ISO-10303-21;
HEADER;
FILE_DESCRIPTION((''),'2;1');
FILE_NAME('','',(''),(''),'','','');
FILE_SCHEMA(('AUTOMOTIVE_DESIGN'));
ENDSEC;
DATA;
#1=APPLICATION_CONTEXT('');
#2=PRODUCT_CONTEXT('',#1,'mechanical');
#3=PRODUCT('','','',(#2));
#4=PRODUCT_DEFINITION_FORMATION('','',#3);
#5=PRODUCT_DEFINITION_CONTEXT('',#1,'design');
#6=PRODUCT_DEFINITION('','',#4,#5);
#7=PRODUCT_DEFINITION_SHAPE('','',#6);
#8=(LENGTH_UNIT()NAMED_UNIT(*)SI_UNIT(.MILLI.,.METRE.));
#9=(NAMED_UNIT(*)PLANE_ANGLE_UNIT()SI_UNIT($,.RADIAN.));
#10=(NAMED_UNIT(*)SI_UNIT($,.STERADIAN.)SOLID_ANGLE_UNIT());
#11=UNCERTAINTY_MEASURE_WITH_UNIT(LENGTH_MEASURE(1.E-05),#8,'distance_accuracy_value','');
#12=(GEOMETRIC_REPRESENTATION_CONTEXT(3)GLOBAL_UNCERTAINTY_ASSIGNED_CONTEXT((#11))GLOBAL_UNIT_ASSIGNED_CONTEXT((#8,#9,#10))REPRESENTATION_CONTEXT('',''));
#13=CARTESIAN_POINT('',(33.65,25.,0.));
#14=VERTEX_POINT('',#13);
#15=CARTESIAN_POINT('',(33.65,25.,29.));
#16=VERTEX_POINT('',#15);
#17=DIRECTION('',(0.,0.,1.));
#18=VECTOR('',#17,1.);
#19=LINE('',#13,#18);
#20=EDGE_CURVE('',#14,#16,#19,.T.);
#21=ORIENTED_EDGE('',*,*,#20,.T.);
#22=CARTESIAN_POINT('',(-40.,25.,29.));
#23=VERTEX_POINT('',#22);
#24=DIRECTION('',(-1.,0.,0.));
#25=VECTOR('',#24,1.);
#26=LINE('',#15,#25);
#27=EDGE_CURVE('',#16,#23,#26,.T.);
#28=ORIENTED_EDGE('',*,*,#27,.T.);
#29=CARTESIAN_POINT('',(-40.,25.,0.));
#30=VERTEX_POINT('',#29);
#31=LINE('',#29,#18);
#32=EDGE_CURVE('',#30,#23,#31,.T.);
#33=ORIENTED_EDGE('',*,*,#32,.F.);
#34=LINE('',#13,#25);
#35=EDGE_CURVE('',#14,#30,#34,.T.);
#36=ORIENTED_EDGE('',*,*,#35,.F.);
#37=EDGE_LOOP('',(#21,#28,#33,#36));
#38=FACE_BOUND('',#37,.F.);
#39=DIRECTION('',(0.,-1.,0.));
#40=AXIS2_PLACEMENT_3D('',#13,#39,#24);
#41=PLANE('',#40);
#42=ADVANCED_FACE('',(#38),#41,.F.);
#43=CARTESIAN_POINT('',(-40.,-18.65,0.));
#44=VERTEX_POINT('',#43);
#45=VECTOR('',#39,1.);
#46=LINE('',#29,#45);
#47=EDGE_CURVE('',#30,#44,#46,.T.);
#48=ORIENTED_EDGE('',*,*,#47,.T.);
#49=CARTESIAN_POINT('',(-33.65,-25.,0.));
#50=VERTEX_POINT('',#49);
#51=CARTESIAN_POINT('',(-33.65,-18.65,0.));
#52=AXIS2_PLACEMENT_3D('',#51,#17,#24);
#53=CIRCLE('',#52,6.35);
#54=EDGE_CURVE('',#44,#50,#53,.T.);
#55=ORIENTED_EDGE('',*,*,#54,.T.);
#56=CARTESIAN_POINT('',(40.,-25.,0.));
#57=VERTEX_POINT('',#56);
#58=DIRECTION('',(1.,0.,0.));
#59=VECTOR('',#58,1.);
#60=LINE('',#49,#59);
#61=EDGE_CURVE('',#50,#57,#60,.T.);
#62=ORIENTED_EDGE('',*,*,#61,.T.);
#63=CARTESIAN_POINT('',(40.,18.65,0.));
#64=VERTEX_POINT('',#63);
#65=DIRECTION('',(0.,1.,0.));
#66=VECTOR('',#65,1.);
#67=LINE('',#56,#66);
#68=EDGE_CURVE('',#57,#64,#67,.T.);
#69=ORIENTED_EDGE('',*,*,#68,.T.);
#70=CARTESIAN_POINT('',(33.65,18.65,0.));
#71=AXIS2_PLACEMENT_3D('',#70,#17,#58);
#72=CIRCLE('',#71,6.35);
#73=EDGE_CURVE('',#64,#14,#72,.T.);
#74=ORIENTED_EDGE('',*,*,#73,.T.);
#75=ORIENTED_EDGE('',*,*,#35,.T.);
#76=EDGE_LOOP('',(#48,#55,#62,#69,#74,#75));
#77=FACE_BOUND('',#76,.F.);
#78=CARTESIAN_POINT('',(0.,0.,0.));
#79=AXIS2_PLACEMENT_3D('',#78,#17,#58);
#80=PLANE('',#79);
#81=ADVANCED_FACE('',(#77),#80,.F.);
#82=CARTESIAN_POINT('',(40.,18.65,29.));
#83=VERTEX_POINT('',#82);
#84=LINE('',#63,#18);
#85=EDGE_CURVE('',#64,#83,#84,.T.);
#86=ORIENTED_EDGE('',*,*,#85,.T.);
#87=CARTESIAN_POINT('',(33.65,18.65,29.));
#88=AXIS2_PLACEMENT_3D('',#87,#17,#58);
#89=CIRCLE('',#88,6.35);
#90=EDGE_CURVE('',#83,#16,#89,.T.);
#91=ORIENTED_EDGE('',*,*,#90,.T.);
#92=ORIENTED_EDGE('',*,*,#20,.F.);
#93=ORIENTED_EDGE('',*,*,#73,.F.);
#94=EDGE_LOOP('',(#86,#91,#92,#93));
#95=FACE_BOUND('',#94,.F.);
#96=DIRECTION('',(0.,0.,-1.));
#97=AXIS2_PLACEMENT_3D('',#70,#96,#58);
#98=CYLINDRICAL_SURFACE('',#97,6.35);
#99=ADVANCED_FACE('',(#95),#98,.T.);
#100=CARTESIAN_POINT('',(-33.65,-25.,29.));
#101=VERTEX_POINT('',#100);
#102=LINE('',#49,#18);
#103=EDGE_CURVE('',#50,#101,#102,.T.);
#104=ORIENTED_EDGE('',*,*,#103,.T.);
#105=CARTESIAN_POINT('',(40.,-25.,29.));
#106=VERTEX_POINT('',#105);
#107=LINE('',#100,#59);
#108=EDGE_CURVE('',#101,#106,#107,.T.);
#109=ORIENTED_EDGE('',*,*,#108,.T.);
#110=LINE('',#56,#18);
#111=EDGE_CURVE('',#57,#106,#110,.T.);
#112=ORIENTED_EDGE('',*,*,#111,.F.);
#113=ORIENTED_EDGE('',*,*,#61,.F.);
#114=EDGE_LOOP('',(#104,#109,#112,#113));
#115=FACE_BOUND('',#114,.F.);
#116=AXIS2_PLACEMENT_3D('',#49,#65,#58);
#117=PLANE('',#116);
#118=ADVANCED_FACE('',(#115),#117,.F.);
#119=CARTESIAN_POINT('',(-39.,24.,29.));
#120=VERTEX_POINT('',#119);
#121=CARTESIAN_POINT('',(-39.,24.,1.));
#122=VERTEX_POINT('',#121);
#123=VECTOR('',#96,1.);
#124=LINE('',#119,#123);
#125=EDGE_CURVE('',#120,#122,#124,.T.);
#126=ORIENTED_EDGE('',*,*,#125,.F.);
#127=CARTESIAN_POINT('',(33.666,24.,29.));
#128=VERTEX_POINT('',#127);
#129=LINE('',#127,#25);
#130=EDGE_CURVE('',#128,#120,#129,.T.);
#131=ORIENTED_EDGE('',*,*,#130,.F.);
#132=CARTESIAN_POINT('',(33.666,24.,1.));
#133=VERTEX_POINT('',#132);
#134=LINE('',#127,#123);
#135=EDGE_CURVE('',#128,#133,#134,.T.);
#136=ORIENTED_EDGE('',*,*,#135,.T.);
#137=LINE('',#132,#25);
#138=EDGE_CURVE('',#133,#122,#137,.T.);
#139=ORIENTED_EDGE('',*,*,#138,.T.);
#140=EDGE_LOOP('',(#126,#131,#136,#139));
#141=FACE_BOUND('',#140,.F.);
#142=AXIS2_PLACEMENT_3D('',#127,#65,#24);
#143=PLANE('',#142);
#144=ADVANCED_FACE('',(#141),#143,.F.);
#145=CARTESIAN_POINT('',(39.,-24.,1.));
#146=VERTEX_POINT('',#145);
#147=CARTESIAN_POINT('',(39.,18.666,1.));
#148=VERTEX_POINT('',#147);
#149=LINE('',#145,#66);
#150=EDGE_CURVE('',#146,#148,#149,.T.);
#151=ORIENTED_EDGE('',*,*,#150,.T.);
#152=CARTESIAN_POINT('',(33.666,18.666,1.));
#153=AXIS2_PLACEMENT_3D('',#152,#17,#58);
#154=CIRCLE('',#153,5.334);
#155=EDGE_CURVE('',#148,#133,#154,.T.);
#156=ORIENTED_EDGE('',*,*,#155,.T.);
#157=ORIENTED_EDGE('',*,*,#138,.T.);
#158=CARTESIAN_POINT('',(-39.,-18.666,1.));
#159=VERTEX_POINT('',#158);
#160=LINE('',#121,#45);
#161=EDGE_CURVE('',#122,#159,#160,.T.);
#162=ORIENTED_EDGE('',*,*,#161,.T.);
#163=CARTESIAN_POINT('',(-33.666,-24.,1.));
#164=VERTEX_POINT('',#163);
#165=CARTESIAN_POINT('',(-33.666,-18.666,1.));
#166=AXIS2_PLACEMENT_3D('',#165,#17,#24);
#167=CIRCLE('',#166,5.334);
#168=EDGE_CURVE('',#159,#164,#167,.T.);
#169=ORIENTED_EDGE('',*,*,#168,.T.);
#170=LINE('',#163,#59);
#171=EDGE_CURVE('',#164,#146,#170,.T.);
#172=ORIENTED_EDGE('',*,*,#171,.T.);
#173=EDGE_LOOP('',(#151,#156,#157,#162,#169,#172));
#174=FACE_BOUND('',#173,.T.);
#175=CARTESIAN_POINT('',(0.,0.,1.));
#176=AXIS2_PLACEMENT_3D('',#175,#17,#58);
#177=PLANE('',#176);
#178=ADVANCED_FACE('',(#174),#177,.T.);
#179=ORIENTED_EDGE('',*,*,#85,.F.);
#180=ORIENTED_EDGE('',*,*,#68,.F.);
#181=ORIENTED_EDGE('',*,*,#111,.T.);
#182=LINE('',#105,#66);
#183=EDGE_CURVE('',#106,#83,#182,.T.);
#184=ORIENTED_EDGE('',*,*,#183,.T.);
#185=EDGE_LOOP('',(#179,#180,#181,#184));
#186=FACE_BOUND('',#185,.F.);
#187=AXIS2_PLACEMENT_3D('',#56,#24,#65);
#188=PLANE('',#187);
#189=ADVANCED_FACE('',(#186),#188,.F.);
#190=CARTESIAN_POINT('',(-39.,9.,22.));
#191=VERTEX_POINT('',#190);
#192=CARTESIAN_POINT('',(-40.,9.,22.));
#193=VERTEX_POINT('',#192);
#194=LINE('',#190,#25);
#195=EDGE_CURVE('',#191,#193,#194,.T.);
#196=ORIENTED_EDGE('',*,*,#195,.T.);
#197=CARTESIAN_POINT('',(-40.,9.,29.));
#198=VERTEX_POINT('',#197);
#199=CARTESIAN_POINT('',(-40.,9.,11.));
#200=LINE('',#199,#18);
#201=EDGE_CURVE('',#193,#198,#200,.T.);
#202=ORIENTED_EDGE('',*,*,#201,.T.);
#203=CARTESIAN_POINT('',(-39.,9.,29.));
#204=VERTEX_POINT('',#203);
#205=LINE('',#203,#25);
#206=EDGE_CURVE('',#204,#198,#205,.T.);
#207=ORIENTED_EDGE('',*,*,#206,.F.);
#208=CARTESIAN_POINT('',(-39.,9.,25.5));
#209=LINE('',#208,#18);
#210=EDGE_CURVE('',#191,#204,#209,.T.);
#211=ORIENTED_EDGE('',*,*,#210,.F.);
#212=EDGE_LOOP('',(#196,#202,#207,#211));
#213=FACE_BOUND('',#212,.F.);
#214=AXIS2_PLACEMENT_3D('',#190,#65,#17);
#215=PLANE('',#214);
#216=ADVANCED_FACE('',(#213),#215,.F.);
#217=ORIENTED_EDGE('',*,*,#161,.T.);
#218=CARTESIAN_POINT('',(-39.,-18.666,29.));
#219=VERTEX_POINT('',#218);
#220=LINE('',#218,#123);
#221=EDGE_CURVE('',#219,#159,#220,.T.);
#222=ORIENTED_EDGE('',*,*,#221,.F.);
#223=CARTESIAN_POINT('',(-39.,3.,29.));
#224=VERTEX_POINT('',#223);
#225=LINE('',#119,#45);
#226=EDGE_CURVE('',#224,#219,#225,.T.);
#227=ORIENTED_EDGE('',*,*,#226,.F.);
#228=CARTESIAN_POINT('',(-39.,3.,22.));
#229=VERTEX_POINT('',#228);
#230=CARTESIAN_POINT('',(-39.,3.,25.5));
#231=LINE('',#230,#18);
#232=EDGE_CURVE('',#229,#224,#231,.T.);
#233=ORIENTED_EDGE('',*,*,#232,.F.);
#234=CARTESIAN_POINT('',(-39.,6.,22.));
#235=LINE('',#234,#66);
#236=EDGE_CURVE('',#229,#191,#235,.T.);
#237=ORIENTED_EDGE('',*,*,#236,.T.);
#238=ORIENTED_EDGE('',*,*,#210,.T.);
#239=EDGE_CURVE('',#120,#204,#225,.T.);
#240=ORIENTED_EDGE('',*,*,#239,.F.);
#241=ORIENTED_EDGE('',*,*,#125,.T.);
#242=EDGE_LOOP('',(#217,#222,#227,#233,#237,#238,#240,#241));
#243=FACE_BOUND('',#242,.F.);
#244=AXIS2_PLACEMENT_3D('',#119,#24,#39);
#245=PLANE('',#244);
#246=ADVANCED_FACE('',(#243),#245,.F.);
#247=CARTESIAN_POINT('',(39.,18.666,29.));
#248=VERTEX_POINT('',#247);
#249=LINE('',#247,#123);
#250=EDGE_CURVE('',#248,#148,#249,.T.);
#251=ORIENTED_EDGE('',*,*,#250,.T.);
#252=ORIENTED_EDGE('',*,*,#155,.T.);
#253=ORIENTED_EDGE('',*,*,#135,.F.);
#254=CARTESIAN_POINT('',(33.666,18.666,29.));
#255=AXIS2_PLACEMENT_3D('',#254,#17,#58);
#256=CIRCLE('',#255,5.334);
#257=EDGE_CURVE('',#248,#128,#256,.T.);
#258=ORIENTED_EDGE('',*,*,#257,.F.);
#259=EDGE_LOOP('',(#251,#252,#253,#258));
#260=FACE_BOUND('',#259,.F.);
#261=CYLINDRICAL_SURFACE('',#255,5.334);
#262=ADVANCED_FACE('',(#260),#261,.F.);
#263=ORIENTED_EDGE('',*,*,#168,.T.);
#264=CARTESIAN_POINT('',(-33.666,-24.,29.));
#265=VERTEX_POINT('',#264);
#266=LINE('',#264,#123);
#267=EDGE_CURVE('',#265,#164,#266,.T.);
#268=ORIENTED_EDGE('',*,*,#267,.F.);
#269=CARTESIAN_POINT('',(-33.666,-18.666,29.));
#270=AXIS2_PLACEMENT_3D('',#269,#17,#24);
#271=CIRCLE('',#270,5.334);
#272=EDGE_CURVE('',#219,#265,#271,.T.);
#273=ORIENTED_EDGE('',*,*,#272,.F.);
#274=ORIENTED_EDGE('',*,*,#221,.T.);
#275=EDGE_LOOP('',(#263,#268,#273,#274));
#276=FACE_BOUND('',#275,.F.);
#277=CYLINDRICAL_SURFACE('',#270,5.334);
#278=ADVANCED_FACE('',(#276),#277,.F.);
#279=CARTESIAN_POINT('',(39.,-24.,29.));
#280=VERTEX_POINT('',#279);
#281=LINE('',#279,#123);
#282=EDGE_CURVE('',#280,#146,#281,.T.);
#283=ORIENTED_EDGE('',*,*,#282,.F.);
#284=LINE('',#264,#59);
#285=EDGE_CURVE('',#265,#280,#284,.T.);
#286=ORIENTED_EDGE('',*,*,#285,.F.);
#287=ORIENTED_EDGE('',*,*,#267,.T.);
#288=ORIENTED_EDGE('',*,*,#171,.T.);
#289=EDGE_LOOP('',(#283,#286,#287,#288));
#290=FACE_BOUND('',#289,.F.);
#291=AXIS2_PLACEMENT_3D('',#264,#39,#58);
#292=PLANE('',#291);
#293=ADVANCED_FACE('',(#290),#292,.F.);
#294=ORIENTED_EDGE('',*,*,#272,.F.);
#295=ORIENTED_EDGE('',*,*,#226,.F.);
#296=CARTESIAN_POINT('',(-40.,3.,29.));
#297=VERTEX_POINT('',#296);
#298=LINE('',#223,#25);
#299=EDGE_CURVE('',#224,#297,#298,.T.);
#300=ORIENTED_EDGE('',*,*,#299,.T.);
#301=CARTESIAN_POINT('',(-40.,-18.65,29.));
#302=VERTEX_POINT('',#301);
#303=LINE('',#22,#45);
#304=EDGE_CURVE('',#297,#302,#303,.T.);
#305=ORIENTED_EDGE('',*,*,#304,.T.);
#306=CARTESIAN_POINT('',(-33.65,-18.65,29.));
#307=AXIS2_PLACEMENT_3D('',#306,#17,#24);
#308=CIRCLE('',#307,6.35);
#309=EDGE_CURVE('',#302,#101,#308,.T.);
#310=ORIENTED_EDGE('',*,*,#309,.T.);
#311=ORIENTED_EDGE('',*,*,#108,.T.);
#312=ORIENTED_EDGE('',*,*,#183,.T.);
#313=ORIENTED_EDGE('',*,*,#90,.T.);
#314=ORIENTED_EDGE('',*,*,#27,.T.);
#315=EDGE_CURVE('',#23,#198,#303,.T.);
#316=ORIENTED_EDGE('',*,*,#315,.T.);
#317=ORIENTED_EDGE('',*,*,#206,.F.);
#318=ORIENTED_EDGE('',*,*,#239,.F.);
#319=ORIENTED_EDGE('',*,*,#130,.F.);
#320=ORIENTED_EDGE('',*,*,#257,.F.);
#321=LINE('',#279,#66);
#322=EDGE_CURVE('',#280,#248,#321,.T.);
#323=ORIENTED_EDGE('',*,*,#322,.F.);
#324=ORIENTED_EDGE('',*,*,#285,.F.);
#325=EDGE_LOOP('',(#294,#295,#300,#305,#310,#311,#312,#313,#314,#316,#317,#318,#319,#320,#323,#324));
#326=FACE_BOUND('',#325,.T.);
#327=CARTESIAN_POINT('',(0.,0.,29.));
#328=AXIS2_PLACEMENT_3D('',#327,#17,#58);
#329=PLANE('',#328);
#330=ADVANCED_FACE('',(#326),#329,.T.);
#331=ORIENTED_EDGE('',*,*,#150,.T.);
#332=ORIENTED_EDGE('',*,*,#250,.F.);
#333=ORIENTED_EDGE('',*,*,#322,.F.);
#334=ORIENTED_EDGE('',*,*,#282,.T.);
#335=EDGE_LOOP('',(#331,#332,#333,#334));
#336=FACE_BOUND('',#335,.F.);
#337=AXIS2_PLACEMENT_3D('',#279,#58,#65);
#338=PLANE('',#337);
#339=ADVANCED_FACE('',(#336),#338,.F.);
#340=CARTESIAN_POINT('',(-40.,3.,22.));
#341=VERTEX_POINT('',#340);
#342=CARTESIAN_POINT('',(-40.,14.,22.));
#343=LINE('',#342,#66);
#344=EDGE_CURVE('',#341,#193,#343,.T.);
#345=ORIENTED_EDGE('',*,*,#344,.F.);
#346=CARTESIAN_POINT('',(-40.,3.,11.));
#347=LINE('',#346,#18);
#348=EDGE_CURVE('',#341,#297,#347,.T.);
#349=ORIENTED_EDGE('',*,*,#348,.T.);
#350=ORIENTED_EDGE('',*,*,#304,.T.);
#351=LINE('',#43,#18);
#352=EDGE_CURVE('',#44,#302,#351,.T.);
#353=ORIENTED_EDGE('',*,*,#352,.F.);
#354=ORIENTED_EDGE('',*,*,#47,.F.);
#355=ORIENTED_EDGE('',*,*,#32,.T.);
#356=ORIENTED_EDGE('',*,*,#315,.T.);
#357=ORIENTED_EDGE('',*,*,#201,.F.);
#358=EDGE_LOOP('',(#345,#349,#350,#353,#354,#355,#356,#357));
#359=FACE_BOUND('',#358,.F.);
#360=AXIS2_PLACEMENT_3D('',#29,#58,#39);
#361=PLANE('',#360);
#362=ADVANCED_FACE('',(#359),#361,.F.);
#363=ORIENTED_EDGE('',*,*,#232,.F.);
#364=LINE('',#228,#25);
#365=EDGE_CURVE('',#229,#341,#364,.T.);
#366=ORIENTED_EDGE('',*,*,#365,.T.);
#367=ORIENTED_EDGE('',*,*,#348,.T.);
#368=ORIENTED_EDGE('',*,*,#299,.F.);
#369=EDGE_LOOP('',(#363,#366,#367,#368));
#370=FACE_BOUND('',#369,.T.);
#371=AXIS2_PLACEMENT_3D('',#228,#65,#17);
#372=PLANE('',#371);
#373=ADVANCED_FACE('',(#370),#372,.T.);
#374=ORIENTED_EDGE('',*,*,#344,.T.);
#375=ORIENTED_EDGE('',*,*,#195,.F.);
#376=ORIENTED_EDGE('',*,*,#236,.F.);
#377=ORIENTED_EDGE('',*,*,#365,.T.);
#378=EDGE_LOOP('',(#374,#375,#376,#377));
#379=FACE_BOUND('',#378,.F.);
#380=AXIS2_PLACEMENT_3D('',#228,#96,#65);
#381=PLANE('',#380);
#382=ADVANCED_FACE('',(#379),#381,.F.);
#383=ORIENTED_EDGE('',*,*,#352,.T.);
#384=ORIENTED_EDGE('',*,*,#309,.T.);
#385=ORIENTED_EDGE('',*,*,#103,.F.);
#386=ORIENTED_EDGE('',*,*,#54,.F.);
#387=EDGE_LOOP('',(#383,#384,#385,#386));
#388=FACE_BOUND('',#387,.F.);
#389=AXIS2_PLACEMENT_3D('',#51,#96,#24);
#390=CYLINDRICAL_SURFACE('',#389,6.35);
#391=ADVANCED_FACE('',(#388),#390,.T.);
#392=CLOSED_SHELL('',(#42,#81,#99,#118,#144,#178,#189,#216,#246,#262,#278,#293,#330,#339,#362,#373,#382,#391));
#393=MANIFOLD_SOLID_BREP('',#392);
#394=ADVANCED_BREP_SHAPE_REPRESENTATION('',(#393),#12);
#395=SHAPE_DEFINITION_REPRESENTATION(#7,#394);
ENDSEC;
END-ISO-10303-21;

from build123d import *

# Parameters (mm, degrees)
F1_DEPTH = 29
F3_DEPTH = 28
F4_W     = 6
F4_H     = 7
F5_DEPTH = 44.45


# Not quite as in the source:
# - a feature names something its author has since deleted; it is built from what else it names


with BuildPart() as f1:
    # F0 (on Top) → F1 (new body)
    with BuildSketch(Plane.XY):
        with BuildLine():
            Line((-33.65, -25), (40, -25))
            Line((40, -25), (40, 18.65))
            ThreePointArc((40, 18.65), (38.1401280605, 23.1401280605), (33.65, 25))
            Line((33.65, 25), (-40, 25))
            Line((-40, 25), (-40, -18.65))
            ThreePointArc((-40, -18.65), (-38.1401280605, -23.1401280605), (-33.65, -25))
        make_face()
    extrude(amount=F1_DEPTH)

    # F2 (on face) → F3 (cut)
    with BuildSketch(Plane.XY.offset(29)):
        with BuildLine():
            Line((33.666, 24), (-39, 24))
            Line((-39, 24), (-39, -18.666))
            ThreePointArc((-39, -18.666), (-37.4377075708, -22.4377075708), (-33.666, -24))
            Line((-33.666, -24), (39, -24))
            Line((39, -24), (39, 18.666))
            ThreePointArc((39, 18.666), (37.4377075708, 22.4377075708), (33.666, 24))
        make_face()
    extrude(amount=-F3_DEPTH, mode=Mode.SUBTRACT)

    # F4 (on face) → F5 (cut)
    with BuildSketch(Plane.YZ.offset(-39)):
        with Locations((6, 25.5)):
            Rectangle(F4_W, F4_H)
    extrude(amount=-F5_DEPTH, mode=Mode.SUBTRACT)


solid = f1.part
